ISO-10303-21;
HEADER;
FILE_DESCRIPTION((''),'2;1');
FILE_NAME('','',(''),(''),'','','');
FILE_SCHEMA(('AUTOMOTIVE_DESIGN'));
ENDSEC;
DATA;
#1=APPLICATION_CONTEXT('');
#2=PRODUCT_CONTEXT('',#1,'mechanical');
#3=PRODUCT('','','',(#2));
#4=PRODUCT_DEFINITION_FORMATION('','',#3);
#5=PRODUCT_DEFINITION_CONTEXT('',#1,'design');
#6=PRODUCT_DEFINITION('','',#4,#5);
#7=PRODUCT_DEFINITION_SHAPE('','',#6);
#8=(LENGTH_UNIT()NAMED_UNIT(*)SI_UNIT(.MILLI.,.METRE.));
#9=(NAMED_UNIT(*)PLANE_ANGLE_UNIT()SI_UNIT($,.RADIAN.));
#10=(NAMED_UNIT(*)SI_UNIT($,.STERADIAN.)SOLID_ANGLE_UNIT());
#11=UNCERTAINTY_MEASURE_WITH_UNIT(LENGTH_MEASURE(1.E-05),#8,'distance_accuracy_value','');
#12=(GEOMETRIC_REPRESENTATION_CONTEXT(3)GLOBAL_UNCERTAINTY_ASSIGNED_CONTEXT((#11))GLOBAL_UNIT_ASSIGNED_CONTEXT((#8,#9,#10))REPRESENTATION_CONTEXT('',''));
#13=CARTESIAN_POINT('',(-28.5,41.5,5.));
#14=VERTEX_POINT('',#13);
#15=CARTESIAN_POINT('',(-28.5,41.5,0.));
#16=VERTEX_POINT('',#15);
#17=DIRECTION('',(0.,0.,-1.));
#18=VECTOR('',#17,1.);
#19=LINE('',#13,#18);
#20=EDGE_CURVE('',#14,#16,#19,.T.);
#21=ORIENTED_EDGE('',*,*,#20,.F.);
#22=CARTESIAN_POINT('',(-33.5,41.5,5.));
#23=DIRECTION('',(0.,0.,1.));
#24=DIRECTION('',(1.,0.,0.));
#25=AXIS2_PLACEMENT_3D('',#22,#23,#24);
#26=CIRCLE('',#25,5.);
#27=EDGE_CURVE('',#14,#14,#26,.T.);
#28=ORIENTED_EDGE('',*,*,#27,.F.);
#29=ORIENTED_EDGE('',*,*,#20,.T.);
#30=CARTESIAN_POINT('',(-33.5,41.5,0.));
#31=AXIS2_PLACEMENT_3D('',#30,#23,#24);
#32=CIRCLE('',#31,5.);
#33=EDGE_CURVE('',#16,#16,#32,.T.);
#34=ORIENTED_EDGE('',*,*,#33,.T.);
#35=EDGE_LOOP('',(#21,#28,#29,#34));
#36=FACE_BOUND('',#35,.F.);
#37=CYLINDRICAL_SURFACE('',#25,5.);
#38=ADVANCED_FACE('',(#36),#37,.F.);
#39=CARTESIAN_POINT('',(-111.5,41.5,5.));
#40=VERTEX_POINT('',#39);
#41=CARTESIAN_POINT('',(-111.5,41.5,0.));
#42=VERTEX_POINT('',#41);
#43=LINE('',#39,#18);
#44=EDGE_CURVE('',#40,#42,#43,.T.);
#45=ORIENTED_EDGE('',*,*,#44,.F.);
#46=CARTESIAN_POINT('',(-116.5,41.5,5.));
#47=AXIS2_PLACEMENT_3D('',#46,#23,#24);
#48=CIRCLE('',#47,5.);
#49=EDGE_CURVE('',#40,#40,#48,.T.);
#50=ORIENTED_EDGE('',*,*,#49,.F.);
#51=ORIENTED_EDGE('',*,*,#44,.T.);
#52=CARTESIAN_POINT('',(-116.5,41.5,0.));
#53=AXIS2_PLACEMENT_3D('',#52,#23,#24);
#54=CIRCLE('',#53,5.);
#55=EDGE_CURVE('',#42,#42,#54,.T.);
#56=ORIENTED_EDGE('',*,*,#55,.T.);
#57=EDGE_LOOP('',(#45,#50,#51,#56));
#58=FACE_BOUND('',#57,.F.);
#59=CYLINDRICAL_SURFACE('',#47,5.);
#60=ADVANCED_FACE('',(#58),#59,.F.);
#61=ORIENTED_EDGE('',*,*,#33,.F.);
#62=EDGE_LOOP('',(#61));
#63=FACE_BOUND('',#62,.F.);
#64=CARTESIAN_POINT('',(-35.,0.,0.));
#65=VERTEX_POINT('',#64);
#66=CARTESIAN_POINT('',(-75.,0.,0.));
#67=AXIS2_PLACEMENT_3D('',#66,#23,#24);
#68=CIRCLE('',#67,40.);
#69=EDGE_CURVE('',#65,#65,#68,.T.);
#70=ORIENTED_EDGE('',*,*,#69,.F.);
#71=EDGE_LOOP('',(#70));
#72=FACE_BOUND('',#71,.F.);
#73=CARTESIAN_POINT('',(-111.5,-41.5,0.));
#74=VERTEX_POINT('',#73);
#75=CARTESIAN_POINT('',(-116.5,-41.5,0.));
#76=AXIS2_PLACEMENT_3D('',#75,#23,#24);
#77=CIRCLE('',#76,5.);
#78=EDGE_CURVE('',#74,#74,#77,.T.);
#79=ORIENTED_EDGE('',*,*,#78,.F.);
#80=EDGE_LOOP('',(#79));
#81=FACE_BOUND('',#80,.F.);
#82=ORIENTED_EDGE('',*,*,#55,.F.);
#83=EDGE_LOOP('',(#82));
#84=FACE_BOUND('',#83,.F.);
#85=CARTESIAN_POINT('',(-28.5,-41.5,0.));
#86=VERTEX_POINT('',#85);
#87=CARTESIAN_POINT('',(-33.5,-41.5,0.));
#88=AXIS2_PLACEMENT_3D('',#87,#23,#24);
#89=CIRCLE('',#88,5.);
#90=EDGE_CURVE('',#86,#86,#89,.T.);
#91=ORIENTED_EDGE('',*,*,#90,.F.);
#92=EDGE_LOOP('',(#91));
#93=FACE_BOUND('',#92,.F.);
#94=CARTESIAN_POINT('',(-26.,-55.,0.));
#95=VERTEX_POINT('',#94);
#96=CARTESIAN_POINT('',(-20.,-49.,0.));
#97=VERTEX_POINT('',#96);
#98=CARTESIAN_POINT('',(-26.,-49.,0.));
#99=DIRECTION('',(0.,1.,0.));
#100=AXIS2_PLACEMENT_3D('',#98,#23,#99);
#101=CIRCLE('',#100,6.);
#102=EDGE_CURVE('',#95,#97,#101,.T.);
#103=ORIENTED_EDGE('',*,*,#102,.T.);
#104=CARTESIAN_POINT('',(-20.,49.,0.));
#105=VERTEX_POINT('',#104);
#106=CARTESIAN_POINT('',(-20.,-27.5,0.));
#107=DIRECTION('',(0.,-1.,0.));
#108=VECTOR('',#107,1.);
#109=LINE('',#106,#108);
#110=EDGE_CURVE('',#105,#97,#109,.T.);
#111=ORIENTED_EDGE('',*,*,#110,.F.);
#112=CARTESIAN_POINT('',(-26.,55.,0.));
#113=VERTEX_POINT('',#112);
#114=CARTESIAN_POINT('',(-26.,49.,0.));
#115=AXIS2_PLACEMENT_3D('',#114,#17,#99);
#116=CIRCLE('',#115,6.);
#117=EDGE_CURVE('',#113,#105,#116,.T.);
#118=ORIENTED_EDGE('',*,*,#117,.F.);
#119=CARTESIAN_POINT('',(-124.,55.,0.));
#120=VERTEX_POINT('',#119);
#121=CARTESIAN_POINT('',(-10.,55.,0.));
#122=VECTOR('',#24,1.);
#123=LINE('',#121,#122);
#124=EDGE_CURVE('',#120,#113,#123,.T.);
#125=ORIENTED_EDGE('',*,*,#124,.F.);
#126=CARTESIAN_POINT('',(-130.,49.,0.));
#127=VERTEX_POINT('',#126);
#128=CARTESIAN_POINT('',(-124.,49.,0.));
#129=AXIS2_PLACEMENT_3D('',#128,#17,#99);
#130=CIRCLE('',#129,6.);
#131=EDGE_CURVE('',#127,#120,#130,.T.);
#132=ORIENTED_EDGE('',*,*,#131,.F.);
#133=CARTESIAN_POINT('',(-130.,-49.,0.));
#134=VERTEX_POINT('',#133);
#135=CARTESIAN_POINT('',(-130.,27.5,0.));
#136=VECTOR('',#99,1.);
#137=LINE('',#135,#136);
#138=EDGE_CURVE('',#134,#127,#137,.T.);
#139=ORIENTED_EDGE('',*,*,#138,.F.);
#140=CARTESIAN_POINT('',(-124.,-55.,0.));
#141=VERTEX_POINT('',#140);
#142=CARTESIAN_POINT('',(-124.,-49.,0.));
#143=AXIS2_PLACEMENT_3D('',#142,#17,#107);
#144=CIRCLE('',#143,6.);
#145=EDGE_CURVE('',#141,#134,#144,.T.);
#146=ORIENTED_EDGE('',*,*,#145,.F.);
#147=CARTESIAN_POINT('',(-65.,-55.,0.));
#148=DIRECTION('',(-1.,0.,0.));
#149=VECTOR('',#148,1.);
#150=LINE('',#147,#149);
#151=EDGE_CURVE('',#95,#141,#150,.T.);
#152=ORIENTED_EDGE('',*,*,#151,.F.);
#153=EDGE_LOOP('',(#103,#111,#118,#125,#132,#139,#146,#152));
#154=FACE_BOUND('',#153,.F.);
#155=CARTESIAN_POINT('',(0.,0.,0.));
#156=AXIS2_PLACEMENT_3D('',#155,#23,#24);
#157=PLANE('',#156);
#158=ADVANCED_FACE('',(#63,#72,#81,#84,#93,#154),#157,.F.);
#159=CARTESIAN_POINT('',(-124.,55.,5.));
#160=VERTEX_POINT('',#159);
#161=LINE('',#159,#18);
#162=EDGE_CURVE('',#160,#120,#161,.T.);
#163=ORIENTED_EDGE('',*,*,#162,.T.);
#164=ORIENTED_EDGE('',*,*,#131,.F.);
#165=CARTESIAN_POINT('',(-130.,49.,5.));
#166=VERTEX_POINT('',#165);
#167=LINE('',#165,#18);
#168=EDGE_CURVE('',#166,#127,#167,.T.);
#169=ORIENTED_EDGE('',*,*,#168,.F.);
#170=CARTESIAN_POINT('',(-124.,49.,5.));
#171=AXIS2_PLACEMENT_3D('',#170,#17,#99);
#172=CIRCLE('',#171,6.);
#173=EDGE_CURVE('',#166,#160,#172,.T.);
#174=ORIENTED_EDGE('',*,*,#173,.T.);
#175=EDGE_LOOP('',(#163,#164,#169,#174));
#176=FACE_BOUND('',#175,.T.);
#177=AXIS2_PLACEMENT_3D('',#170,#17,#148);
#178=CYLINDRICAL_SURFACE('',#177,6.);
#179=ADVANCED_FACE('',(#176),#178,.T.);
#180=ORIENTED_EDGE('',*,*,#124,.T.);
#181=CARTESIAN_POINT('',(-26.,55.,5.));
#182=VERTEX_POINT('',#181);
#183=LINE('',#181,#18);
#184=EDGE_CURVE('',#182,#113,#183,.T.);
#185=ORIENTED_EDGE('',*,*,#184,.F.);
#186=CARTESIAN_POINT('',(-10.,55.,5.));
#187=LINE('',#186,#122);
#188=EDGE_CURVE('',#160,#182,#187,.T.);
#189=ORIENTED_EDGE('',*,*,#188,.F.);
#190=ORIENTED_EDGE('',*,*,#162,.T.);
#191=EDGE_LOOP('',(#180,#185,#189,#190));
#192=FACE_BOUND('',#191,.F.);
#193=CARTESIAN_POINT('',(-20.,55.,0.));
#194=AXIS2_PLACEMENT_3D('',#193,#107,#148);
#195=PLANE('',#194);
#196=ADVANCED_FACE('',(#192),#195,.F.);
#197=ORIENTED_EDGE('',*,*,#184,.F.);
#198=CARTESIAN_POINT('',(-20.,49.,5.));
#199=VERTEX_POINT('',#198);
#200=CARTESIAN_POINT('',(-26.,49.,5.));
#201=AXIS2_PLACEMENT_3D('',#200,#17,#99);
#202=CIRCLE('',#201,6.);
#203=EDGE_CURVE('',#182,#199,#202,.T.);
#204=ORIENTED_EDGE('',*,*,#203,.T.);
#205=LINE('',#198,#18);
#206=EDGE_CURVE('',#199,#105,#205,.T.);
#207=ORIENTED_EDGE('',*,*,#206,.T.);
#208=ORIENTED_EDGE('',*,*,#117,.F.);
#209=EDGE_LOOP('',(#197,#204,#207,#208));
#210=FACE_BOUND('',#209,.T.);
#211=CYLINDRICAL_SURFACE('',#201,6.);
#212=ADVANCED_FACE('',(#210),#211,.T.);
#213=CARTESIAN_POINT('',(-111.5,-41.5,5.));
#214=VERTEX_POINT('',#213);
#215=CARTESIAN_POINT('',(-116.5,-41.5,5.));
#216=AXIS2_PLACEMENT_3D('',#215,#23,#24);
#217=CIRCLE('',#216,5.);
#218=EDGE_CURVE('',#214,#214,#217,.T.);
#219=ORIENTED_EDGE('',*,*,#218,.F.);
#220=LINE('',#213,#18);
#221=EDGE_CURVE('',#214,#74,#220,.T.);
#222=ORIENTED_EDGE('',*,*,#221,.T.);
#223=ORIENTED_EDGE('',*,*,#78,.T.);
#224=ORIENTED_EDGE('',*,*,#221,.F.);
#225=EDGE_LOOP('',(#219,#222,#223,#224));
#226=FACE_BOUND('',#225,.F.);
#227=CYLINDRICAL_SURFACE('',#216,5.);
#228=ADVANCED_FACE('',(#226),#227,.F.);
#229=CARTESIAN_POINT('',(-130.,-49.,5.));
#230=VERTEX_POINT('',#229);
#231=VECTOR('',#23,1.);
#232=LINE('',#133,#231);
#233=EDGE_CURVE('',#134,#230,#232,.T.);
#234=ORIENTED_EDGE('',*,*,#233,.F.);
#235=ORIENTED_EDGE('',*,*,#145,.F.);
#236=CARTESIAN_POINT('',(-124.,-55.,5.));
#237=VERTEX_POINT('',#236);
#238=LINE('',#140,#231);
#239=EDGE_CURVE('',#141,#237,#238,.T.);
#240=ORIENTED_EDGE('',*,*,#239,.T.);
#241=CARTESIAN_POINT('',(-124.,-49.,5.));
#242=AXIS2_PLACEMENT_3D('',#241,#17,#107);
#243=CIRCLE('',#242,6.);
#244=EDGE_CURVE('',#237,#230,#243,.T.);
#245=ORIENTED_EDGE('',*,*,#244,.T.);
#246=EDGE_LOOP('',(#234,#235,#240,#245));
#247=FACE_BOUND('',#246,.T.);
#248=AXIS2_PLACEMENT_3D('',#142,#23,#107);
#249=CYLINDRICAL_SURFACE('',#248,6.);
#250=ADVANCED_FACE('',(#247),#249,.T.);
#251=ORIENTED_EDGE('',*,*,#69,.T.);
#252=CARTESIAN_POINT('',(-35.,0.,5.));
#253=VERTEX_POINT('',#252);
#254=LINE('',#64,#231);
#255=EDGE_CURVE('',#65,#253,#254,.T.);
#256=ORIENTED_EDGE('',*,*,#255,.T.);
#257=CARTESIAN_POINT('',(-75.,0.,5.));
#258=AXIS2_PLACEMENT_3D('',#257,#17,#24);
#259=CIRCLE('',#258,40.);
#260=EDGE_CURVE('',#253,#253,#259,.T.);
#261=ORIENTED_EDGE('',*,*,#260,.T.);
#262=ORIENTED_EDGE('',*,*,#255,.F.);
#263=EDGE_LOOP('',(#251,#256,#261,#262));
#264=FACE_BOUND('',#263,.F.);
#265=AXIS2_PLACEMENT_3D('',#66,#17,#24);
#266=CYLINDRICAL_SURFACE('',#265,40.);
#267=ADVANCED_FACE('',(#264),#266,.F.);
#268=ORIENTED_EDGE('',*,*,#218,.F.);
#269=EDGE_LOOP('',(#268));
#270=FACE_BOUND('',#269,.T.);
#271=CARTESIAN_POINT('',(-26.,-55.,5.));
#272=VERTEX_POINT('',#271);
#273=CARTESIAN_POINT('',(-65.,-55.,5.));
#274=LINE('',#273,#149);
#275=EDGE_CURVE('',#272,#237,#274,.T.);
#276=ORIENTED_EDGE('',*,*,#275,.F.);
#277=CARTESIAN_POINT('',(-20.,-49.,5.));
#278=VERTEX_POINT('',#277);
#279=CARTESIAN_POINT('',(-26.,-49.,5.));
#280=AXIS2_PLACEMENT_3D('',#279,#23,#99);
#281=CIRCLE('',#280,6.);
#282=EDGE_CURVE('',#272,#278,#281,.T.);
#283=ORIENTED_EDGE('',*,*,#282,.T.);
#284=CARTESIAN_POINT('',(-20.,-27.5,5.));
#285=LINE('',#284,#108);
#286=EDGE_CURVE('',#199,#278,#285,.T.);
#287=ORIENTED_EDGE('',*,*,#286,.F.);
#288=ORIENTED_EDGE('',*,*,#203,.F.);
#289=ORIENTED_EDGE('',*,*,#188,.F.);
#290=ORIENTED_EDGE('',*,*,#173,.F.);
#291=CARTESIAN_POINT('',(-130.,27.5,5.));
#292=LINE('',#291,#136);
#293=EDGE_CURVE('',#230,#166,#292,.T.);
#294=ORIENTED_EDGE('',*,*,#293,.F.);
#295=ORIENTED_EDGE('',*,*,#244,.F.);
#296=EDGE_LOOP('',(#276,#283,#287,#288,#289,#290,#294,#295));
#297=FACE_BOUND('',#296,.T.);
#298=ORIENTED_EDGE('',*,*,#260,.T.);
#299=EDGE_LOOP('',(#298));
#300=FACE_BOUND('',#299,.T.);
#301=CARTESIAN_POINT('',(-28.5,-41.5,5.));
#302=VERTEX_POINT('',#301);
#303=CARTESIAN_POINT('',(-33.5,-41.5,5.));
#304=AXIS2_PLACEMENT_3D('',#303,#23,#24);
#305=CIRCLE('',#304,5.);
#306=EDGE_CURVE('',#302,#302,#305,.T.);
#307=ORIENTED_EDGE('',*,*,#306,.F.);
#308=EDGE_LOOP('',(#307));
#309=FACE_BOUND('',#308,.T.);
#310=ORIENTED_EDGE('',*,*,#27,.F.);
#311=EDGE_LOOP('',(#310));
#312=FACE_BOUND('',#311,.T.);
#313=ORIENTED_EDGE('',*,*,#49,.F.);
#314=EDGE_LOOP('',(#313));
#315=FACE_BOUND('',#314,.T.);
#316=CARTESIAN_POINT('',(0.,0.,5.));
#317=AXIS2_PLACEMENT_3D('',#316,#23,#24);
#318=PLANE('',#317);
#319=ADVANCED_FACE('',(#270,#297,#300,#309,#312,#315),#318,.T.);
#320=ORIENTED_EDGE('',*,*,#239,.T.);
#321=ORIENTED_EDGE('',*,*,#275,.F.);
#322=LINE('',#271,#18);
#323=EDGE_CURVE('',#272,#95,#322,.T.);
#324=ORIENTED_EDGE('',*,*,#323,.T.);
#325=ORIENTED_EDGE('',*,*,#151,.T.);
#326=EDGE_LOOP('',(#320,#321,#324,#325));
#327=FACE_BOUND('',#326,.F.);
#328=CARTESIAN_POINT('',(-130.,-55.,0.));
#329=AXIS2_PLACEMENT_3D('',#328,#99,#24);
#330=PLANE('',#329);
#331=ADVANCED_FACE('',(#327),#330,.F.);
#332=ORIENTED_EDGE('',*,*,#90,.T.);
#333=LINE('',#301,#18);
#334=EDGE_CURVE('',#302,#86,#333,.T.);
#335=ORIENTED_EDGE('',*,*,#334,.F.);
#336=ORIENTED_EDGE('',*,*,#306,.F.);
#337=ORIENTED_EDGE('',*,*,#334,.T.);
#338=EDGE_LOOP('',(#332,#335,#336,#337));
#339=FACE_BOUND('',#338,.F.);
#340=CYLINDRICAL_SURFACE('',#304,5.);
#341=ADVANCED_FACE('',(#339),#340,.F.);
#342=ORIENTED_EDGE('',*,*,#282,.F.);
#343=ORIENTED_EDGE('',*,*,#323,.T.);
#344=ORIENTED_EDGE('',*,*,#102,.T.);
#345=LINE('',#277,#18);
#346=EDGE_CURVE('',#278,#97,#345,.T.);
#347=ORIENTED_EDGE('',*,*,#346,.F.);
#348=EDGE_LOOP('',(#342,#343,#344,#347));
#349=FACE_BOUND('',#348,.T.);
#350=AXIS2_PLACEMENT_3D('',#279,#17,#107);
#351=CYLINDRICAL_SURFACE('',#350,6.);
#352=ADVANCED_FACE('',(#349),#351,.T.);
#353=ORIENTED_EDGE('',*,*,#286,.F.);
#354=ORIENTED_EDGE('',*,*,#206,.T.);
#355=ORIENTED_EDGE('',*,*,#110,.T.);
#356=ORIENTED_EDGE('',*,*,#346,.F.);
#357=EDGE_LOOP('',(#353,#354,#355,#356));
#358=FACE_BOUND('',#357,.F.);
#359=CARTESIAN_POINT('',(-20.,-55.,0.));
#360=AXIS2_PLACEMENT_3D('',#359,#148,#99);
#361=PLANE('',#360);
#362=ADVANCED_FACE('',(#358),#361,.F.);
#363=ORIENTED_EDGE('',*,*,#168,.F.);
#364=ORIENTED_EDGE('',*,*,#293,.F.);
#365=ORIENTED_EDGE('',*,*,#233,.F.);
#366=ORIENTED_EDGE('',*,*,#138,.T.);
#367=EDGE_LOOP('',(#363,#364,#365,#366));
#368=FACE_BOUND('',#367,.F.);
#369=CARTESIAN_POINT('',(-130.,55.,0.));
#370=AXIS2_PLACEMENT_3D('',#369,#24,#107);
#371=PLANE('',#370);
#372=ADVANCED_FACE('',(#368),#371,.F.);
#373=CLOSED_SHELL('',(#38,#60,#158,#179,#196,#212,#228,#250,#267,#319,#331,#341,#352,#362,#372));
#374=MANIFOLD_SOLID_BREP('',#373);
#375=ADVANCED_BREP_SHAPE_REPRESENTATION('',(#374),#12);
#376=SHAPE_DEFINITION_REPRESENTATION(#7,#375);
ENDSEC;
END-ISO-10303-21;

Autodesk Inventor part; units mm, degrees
ref_plane "YZ Plane" through (0, 0, 0) normal (1, 0, 0) x (0, 1, 0)
ref_plane "XZ Plane" through (0, 0, 0) normal (0, 1, 0) x (-1, 0, 0)
ref_plane "XY Plane" through (0, 0, 0) normal (0, 0, 1) x (1, 0, 0)
sketch "Sketch1" plane through (0, 0, 0) normal (0, 0, 1) x (1, 0, 0)
  line L0 (-200, 100) -> (200, 100)
  line L1 (200, 100) -> (200, -100)
  line L2 (200, -100) -> (-200, -100)
  line L3 (-200, -100) -> (-200, 100)
  line L4 (-200, 100) -> (200, -100) construction
  line L5 (200, 100) -> (-200, -100) construction
  point P0 (0, 0)
  point P1 (0, 0)
  point P2 (0, 0)
  dimension "d25" = 400
  dimension "d26" = 200
extrude "Plate1" add sketch "Sketch1" along normal blind 5
sketch "Sketch5" plane through (-195, -100, 0) normal (-1, 0, 0) x (0, -1, 0)
  line L0 (-200, 0) -> (0, 0)
  line L1 (0, 0) -> (0, 50)
  line L2 (0, 50) -> (-200, 50)
  line L3 (-200, 50) -> (-200, 0)
edge flange "Flange2" height 50 angle 90 thickness 5 bend radius 5 thickness toward (-1, 0, 0) relief round relief width 5 relief depth 2.5 corner gap 5 corner form 0 edges at (-200, 0, 5) (200, 0, 5) (0, 100, 5) (0, -100, 5) wall of the first edge with corners at (-195, 100, 0) (-195, -100, 0) (-195, -100, 50) (-195, 100, 50)
bend "Bend2"
corner "Corner2"
sketch "Sketch6" plane through (0, 0, 5) normal (0, 0, 1) x (1, 0, 0)
  circle A0 centre (-75, 0) radius 16
  circle A1 centre (75, 0) radius 16
  line L0 (0, 0) -> (0, 55.0725) construction
  circle A2 centre (33.5, 41.5) radius 5
  circle A3 centre (116.5, 41.5) radius 5
  circle A4 centre (116.5, -41.5) radius 5
  circle A5 centre (33.5, -41.5) radius 5
  line L1 (75, 0) -> (-75, 0)
  line L2 (75, 0) -> (75, -40.8866)
  circle A6 centre (-33.5, 41.5) radius 5
  circle A7 centre (-116.5, 41.5) radius 5
  circle A8 centre (-116.5, -41.5) radius 5
  circle A9 centre (-33.5, -41.5) radius 5
  point P0 (-75, -40.8866)
  dimension "d37" = 32
  dimension "d38" = 150
  dimension "d55" = 10
  dimension "d56" = 83
  dimension "d57" = 83
extrude "Cut1" cut sketch "Sketch6" against normal blind 5
sketch "Sketch7" plane through (-194.2929, 100, 10) normal (0, 1, 0) x (1, 0, 0)
  circle A0 centre (194.2929, -20) radius 6.5
  line L0 (5, 5) -> (383.5858, 5) projected
  line L1 (383.5858, 5) -> (384.2929, 5) projected
  line L2 (384.2929, 5) -> (383.5858, 5) projected
  line L3 (383.5858, 5) -> (5, 5) projected
  line L4 (5, 5) -> (4.2929, 5) projected
  line L5 (4.2929, 5) -> (5, 5) projected
  point P0 (194.2929, 10)
  dimension "d41" = 13
  dimension "d42" = 25
extrude "Extrusion2" cut sketch "Sketch7" against normal through all
pattern_linear "Rectangular Pattern1" count 3 spacing 160 along (-1, 0, 0) of "Extrusion2" first direction both ways yes
sketch "Sketch8" plane through (0, 0, 0) normal (1, 0, 0) x (0, 1, 0)
  line L0 (-94.2929, 50) -> (94.2929, 50) projected
  circle A0 centre (0, 30) radius 6.5
  line L1 (89.2929, 5) -> (-89.2929, 5) projected
  point P0 (0, 0)
  dimension "d48" = 13
  dimension "d49" = 25
extrude "Extrusion3" cut sketch "Sketch8" along normal through all both and the other way through all
pattern_linear "Rectangular Pattern2" count 3 spacing 70 along (0, 1, 0) of "Extrusion3" first direction both ways yes
sketch "Sketch9" plane through (0, 0, 0) normal (0, 0, 1) x (1, 0, 0)
  line L0 (-233.1694, -164.5287) -> (298.5547, -164.5287)
  line L1 (298.5547, -164.5287) -> (298.5547, 258.31)
  line L2 (298.5547, 258.31) -> (-233.1694, 258.31)
  line L3 (-233.1694, 258.31) -> (-233.1694, -164.5287)
  circle A0 centre (-75, 0) radius 16 projected
  line L4 (-130, -55) -> (-20, -55)
  line L5 (-20, -55) -> (-20, 55)
  line L6 (-20, 55) -> (-130, 55)
  line L7 (-130, 55) -> (-130, -55)
  line L8 (-130, -55) -> (-20, 55) construction
  line L9 (-20, -55) -> (-130, 55) construction
  circle A1 centre (-75, 0) radius 40
  point P0 (0, 0)
  dimension "d58" = 110
  dimension "d59" = 110
  dimension "d60" = 80
extrude "Extrusion4" cut sketch "Sketch9" along normal through all both and the other way through all
fillet "Corner Round1" radius 6 4 edges at (-130, -55, 2.5) (-130, 55, 2.5) (-20, 55, 2.5) (-20, -55, 2.5)
equation "\"d25\" = Гриндер_проходная_ширина + 2 * Гриндер_размер_фланца"
equation "\"d26\" = Гриндер_высота"
equation "\"d38\" = Гриндер_Валы_между_центрами"
equation "\"d57\" = d56"
equation "\"d39\" = Thickness"
equation "\"d41\" = Гриндер_диам_отврс_корпуса"
equation "\"d42\" = Гриндер_отступ_отврс_корпуса"
equation "\"d48\" = Гриндер_диам_отврс_корпуса"
equation "\"d49\" = Гриндер_отступ_отврс_корпуса"
equation "\"d2\" = Thickness"
equation "\"d27\" = BendReliefWidth"
equation "\"d28\" = BendReliefDepth"
equation "\"d29\" = MinimumRemnant"
equation "\"d30\" = TransitionRadius"
equation "\"d33\" = BendRadius"
equation "\"d34\" = CornerReliefSize"
equation "\"d36\" = JacobiRadiusSize"
equation "\"BendReliefWidth\" = Thickness"
equation "\"BendReliefDepth\" = 0.5 * Thickness"
equation "\"TransitionRadius\" = BendRadius"
equation "\"JacobiRadiusSize\" = BendRadius"
equation "\"GapSize\" = Thickness"
equation "\"Гриндер_отступ_отврс_корпуса\" = 25"
equation "\"Гриндер_диам_отврс_корпуса\" = 13"
equation "\"Гриндер_проходная_ширина\" = 320"
equation "\"Гриндер_проходная_длина\" = 320"
equation "\"Гриндер_высота\" = 200"
equation "\"Гриндер_размер_фланца\" = 40"
equation "\"Гриндер_Валы_между_центрами\" = 150"
equation "\"Thickness\" = 5"
equation "\"MinimumRemnant\" = 10"
equation "\"BendRadius\" = 5"
equation "\"CornerReliefSize\" = 20"
properties part number "NDM-VOS 162 harrow plate 5" material "Stainless Steel"
